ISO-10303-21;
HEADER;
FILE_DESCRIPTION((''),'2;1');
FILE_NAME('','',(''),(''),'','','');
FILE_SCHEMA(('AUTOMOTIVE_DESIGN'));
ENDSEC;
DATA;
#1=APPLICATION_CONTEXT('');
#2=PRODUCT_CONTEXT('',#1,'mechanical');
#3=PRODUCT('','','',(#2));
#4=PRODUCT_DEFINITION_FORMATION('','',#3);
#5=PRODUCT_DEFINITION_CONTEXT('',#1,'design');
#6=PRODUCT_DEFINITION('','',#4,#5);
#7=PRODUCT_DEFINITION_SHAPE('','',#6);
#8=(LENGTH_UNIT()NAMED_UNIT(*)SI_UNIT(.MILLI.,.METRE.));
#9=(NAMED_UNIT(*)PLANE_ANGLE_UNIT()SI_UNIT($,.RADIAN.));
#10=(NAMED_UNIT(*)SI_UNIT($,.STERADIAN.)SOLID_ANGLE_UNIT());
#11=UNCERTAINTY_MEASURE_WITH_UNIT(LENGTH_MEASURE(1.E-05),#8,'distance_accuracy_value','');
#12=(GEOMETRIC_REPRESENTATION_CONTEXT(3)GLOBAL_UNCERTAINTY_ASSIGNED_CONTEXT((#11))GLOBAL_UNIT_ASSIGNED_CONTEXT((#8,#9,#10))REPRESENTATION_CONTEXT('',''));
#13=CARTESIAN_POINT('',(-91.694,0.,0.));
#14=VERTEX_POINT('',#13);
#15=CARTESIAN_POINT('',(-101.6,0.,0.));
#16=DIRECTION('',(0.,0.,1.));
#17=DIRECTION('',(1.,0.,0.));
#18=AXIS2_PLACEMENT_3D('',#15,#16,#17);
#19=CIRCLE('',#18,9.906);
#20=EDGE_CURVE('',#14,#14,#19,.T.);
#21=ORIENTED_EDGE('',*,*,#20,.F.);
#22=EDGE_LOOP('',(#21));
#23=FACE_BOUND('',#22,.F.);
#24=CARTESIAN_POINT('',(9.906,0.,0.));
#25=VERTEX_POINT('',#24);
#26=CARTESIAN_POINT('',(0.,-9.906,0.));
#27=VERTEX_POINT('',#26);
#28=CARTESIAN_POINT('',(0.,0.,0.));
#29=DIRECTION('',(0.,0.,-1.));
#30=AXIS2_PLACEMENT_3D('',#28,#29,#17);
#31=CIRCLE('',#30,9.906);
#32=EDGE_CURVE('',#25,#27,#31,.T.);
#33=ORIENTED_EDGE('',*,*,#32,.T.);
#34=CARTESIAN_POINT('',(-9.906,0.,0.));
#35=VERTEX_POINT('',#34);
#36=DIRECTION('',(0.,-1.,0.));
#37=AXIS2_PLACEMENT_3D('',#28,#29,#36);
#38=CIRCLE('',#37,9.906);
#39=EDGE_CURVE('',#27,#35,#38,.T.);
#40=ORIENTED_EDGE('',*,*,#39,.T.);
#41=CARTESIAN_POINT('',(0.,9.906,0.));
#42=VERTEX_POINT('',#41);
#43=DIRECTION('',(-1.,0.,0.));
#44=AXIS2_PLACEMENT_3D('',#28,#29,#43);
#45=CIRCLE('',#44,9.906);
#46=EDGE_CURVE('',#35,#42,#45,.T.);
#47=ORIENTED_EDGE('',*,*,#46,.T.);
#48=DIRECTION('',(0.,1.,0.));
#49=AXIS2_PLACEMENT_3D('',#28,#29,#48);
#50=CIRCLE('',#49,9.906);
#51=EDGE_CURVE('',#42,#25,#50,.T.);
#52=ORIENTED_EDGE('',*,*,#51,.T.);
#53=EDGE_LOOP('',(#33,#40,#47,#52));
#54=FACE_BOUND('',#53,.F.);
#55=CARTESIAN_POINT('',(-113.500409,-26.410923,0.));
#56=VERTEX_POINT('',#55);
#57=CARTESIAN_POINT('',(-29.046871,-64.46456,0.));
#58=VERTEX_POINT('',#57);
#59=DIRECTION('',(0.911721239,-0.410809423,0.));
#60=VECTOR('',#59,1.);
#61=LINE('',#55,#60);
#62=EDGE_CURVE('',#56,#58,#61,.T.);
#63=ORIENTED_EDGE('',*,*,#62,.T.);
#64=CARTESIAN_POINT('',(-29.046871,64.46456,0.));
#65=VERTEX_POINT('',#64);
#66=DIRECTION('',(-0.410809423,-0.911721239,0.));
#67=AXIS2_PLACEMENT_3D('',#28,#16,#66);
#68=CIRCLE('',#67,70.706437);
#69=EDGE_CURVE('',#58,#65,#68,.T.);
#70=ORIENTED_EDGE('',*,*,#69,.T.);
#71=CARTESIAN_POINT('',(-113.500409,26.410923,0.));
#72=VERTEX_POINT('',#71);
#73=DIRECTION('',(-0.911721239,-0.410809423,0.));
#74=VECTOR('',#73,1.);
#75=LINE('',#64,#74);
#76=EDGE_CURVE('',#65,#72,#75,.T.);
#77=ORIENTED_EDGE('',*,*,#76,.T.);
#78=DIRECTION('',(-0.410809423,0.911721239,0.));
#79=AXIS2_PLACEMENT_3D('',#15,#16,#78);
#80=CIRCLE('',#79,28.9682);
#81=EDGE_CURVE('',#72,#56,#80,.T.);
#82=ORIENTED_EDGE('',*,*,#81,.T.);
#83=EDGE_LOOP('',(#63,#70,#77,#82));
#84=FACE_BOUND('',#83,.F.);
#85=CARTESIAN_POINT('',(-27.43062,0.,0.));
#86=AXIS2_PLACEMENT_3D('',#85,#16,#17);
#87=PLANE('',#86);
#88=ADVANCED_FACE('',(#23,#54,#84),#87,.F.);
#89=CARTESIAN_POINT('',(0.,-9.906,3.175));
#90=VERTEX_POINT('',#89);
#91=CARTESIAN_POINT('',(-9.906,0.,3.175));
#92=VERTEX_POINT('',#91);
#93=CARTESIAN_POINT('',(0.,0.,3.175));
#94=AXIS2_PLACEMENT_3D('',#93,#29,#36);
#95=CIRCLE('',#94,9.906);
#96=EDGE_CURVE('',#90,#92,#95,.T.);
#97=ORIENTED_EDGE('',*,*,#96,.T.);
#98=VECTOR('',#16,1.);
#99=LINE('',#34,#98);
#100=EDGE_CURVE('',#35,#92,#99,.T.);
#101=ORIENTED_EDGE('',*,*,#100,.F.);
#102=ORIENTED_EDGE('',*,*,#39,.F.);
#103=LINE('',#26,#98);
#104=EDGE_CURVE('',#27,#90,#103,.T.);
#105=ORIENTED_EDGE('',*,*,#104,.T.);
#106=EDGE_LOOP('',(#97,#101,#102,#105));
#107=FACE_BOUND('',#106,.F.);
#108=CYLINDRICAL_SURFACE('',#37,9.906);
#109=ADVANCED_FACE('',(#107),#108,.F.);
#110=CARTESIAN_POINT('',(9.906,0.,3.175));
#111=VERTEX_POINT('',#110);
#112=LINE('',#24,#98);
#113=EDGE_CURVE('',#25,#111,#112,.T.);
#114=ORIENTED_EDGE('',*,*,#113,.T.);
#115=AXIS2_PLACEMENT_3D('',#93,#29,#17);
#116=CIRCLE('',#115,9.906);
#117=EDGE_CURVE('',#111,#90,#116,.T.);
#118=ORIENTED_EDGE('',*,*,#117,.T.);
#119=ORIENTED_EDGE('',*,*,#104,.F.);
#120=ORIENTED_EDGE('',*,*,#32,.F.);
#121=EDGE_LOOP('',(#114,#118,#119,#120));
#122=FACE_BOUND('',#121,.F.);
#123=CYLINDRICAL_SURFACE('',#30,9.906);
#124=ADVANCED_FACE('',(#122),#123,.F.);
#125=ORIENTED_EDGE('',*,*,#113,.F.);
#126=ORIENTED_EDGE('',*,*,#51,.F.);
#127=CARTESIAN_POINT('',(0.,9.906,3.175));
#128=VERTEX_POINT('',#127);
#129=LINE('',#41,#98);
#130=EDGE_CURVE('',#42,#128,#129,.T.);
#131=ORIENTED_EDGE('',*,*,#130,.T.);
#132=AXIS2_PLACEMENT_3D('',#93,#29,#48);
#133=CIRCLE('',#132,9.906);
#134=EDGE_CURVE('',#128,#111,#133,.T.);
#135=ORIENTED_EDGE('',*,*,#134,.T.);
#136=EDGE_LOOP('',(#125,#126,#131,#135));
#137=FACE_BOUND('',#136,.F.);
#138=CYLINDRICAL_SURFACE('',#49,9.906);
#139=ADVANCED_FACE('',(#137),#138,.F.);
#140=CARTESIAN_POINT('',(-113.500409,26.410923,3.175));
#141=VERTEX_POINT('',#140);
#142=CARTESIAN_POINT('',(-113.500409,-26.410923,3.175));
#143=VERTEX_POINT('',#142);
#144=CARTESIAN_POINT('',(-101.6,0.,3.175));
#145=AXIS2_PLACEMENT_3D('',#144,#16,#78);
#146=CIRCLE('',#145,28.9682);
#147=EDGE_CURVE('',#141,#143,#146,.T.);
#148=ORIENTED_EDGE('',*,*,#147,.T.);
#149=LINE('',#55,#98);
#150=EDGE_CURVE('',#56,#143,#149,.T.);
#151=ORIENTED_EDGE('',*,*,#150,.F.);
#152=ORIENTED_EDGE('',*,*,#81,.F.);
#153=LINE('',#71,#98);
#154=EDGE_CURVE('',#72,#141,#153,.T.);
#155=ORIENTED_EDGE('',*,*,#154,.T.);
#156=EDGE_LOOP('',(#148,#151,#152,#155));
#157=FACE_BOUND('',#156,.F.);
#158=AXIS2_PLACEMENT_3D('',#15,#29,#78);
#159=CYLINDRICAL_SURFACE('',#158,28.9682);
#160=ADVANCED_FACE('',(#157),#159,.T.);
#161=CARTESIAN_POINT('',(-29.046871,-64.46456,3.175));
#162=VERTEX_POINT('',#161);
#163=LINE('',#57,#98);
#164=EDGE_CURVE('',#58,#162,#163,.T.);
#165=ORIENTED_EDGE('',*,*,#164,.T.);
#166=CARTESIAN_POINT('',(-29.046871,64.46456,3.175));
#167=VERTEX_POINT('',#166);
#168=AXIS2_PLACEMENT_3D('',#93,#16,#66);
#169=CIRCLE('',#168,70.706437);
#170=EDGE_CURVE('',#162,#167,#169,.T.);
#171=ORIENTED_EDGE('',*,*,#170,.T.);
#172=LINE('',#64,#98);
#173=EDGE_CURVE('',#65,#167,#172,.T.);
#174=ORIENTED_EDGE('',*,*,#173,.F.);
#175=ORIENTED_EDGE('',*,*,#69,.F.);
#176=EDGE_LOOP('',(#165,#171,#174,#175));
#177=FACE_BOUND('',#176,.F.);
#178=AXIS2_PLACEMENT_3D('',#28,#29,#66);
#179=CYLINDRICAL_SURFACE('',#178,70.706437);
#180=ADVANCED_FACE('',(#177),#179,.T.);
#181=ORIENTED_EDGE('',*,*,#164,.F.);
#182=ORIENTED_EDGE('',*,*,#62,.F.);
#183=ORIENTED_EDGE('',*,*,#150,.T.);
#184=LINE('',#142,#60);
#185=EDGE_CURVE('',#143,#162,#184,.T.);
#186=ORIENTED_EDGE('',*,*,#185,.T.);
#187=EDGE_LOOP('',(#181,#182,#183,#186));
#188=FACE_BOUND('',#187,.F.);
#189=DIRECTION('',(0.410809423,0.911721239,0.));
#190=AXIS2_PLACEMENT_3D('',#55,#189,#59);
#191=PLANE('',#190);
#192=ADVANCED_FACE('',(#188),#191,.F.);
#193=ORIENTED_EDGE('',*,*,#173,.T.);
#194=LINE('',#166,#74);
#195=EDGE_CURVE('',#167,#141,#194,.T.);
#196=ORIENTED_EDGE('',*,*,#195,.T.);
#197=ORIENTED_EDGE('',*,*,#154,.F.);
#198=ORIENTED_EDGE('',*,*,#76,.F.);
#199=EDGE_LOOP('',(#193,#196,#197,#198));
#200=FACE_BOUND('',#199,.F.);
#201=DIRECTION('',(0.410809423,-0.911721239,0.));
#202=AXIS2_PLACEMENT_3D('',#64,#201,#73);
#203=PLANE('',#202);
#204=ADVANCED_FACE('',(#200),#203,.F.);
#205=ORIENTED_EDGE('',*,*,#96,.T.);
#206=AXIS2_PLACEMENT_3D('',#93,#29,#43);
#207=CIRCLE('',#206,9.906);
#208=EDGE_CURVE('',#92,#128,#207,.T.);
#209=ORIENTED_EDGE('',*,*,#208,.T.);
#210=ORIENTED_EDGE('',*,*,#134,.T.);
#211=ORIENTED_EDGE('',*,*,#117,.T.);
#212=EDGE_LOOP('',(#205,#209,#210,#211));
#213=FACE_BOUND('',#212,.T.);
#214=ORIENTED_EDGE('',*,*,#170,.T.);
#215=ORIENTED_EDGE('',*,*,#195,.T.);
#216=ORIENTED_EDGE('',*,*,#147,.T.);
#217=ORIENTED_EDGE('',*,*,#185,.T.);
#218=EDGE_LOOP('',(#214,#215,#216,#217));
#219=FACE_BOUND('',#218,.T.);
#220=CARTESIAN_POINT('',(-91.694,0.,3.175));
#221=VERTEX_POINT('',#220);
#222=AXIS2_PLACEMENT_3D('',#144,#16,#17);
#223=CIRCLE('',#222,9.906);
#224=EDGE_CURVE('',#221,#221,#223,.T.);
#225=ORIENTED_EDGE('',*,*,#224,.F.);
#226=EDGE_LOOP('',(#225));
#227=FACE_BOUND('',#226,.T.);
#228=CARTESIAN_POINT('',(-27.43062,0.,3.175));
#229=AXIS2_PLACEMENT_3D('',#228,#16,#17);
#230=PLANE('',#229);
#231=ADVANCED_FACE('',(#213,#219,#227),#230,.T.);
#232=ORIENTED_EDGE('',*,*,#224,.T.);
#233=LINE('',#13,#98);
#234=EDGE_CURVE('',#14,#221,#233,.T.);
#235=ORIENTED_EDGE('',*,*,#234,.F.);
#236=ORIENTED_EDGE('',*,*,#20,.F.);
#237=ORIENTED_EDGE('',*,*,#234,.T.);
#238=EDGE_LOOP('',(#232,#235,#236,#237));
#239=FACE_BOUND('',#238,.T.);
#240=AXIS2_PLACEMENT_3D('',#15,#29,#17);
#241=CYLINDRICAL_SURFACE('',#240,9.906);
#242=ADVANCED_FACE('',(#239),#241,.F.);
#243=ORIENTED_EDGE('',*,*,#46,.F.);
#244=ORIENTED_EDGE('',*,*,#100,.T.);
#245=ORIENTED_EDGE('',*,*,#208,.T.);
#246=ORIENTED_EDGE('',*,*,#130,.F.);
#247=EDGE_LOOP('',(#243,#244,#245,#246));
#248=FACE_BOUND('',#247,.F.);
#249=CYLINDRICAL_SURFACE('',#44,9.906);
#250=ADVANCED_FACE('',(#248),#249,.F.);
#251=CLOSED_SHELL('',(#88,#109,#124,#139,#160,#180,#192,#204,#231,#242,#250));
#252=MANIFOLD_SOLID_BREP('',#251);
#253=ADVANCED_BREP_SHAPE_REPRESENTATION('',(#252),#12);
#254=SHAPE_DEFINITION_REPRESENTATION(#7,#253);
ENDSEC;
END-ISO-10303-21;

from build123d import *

# Parameters (mm, degrees)
F0_R     = 13.9065
F0_R_2   = 9.906
F1_DEPTH = 3.175


# Not quite as in the source:
# - a length typed as a fraction of an inch, garbled in the dataset ("3 / 203.2 mm" for 3/8 in), is restored


with BuildPart() as f1:
    # F0 (on Top) → F1 (new body)
    with BuildSketch(Plane.XY):
        with BuildLine():
            Line((-29.0468705796, 64.4645603781), (-113.5004093806, 26.4109228888))
            ThreePointArc((-113.5004093806, 26.4109228888), (-130.5681996552, 0), (-113.5004093806, -26.4109228888))
            Line((-113.5004093806, -26.4109228888), (-29.0468705796, -64.4645603781))
            ThreePointArc((-29.0468705796, -64.4645603781), (70.706437014, 0), (-29.0468705796, 64.4645603781))
        make_face()
        with Locations((-101.6, 0)):
            Circle(F0_R, mode=Mode.SUBTRACT)
        with BuildLine():
            ThreePointArc((0, 64.77), (45.7993062175, 45.7993062175), (64.77, 0))
            ThreePointArc((64.77, 0), (45.7993062175, -45.7993062175), (0, -64.77))
            ThreePointArc((0, -64.77), (-45.7993062175, -45.7993062175), (-64.77, 0))
            ThreePointArc((-64.77, 0), (-45.7993062175, 45.7993062175), (0, 64.77))
        make_face(mode=Mode.SUBTRACT)
        with Locations((-101.6, 0)):
            Circle(F0_R)
        with Locations((-101.6, 0)):
            Circle(F0_R_2, mode=Mode.SUBTRACT)
        with BuildLine():
            Line((0, 9.906), (0, 64.77))
            ThreePointArc((0, 64.77), (-45.7993062175, 45.7993062175), (-64.77, 0))
            Line((-64.77, 0), (-9.906, 0))
            ThreePointArc((-9.906, 0), (-7.0045997744, 7.0045997744), (0, 9.906))
        make_face()
        with BuildLine():
            ThreePointArc((-64.77, 0), (-45.7993062175, -45.7993062175), (0, -64.77))
            Line((0, -64.77), (0, -9.906))
            ThreePointArc((0, -9.906), (-7.0045997744, -7.0045997744), (-9.906, 0))
            Line((-9.906, 0), (-64.77, 0))
        make_face()
        with BuildLine():
            ThreePointArc((0, -64.77), (45.7993062175, -45.7993062175), (64.77, 0))
            ThreePointArc((64.77, 0), (45.7993062175, 45.7993062175), (0, 64.77))
            Line((0, 64.77), (0, 9.906))
            ThreePointArc((0, 9.906), (7.0045997744, 7.0045997744), (9.906, 0))
            ThreePointArc((9.906, 0), (7.0045997744, -7.0045997744), (0, -9.906))
            Line((0, -9.906), (0, -64.77))
        make_face()
    extrude(amount=F1_DEPTH)


solid = f1.part
